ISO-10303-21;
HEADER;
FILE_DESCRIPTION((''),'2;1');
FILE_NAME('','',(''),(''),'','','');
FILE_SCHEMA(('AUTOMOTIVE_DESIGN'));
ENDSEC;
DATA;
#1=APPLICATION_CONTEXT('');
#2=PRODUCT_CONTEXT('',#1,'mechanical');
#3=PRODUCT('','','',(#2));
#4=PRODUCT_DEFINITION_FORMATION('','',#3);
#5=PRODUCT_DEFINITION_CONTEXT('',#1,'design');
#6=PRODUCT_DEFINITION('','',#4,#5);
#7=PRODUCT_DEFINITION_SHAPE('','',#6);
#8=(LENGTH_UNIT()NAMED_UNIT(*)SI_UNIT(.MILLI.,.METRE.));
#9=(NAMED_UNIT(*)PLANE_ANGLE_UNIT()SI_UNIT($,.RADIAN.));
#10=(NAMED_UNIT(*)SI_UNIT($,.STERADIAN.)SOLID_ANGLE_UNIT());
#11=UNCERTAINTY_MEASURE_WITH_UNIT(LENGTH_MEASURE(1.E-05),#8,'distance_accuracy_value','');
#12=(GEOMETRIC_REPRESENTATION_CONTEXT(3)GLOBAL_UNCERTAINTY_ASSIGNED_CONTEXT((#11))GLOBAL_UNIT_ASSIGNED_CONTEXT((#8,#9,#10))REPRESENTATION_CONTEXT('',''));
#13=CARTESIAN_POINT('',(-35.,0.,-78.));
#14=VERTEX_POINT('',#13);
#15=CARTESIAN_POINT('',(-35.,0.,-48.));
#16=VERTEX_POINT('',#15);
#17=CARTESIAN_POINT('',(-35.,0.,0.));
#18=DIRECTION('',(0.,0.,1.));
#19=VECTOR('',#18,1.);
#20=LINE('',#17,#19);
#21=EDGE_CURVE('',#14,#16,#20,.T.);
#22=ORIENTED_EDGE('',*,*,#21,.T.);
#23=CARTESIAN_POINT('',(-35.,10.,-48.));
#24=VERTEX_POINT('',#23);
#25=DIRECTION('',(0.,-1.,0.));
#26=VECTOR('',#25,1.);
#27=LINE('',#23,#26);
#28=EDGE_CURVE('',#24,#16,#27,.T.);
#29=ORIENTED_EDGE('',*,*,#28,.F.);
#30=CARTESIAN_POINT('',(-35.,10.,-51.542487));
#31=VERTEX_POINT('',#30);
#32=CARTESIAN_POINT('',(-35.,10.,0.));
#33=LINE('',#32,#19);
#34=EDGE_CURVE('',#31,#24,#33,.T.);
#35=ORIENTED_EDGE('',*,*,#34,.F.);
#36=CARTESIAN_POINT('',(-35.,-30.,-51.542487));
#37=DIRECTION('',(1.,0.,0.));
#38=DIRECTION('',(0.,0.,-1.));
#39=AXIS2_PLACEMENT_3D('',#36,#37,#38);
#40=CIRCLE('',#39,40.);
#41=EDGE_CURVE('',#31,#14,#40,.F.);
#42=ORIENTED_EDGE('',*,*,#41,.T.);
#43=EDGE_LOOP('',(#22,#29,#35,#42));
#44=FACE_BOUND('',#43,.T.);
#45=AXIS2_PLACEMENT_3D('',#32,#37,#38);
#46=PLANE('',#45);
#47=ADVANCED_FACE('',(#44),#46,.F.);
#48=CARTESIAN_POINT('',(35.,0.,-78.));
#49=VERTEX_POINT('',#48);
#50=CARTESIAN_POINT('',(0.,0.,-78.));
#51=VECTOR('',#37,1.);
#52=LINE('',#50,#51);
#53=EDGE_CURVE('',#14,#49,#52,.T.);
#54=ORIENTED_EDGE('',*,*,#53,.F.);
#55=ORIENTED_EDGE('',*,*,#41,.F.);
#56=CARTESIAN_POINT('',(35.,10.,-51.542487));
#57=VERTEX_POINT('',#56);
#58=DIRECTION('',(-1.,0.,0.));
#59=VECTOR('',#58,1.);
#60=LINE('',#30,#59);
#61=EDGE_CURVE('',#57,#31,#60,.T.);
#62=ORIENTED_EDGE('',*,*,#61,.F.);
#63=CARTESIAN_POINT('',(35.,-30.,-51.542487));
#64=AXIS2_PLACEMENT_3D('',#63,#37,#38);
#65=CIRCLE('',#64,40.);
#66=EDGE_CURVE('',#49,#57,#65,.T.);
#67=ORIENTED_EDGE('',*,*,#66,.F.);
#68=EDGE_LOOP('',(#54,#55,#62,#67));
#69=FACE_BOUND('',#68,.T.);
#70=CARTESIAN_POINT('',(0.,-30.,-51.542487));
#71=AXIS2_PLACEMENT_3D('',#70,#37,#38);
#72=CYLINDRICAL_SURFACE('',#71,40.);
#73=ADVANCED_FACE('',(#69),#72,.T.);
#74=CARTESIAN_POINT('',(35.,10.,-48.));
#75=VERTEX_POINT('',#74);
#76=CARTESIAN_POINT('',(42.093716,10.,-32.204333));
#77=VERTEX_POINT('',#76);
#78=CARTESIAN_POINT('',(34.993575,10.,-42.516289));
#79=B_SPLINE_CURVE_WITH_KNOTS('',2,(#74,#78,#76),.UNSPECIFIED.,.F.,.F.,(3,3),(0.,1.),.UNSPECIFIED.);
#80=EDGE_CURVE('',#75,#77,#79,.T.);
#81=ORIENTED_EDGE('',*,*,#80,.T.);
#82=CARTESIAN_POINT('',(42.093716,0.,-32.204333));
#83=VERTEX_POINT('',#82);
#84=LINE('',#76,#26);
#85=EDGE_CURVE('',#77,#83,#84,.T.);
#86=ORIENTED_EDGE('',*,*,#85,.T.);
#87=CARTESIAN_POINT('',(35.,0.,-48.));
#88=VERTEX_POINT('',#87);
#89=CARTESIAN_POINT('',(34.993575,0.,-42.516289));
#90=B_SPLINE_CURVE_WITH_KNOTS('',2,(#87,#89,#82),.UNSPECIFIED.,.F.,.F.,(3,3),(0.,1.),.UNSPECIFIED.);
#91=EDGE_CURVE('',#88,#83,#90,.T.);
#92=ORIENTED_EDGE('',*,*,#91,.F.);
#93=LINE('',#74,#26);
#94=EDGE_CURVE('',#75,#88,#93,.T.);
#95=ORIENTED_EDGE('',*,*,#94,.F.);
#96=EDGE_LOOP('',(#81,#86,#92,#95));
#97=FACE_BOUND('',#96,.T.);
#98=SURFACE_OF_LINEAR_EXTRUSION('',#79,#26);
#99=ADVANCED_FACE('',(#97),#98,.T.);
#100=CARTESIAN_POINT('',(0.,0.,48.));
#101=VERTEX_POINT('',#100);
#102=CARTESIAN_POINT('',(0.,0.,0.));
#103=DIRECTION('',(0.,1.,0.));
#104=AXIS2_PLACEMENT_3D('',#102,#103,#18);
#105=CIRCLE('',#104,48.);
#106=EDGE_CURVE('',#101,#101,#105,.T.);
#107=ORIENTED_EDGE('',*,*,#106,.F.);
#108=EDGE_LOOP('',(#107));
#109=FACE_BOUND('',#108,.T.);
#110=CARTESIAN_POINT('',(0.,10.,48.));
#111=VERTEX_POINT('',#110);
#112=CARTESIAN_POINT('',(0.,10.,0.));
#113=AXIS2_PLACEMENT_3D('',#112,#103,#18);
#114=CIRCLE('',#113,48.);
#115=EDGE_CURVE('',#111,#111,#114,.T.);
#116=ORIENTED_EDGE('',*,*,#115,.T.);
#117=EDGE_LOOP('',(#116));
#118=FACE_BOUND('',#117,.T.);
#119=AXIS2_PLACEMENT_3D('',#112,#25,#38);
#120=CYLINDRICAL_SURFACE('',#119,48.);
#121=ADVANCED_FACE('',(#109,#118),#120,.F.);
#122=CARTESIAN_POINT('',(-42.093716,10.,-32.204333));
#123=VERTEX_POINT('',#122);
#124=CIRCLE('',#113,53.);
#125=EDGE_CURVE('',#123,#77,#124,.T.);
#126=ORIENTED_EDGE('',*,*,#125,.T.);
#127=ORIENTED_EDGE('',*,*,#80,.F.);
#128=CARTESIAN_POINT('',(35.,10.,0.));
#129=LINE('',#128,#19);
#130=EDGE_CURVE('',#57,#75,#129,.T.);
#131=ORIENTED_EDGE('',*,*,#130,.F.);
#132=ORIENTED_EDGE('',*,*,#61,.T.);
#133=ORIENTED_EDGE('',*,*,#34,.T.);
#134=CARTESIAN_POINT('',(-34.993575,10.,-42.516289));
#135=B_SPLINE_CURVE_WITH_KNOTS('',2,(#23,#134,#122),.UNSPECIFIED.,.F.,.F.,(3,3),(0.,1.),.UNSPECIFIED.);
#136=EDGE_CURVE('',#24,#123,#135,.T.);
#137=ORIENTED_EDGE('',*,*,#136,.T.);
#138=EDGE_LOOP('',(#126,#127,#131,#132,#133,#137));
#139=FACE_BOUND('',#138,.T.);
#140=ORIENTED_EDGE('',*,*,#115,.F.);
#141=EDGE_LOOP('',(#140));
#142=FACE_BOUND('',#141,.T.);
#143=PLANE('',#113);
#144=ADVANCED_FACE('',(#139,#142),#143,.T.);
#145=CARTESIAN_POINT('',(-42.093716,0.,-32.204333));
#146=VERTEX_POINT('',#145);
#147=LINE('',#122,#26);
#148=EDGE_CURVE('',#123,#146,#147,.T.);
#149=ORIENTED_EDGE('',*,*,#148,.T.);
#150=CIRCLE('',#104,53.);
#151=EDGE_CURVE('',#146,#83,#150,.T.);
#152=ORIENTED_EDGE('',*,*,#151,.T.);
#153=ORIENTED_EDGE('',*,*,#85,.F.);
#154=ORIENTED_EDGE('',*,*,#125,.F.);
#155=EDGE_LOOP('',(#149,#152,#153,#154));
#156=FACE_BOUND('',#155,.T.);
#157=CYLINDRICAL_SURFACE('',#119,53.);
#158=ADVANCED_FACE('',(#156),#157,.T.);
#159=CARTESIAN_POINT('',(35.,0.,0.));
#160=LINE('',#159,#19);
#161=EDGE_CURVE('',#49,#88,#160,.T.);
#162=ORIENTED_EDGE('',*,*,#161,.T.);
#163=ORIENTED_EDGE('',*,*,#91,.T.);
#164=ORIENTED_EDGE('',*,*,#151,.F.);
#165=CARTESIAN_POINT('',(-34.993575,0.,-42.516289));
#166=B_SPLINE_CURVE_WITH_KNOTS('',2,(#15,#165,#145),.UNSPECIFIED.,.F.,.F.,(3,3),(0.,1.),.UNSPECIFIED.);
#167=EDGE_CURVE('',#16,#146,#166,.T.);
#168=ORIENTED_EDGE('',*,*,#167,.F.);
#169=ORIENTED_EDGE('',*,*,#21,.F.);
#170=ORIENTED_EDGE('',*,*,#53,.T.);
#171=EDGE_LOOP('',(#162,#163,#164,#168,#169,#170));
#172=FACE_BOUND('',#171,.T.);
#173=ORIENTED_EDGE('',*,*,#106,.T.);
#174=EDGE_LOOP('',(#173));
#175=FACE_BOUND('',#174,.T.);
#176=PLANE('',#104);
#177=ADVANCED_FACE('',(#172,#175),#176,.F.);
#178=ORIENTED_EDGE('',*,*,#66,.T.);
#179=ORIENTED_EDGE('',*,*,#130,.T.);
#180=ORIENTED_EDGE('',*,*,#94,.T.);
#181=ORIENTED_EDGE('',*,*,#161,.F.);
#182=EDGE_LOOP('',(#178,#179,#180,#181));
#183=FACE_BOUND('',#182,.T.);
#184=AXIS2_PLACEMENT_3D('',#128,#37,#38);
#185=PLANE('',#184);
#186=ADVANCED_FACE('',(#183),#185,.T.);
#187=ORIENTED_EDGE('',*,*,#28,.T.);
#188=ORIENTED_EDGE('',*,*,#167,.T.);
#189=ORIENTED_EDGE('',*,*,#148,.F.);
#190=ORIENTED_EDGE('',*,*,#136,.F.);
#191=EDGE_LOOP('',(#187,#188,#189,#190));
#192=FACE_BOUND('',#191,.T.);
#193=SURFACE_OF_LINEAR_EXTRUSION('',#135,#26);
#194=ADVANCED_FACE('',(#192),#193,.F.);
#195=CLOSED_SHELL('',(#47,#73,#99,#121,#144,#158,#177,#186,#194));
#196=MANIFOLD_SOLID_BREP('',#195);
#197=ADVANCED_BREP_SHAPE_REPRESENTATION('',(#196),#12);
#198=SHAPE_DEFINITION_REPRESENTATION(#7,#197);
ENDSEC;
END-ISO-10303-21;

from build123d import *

# Parameters (mm, degrees)
SKETCH1_R           = 48
BOSS_EXTRUDE1_DEPTH = 10
FILLET1_R           = 40


with BuildPart() as part:
    # Sketch1 → Boss-Extrude1 (new body)
    with BuildSketch(Plane(origin=(0, 0, 0), x_dir=(1, 0, 0), z_dir=(0, 1, 0))):
        with BuildLine():
            Line((35, 78), (-35, 78))
            Line((-35, 78), (-35, 48))
            add(Edge.make_bspline(
                [(-35, 48), (-34.99357519, 42.516288621), (-42.093715926, 32.204333242)],
                knots=[0, 0, 0, 1, 1, 1], degree=2))
            ThreePointArc((-42.093715926, 32.204333242), (0, -53), (42.093715926, 32.204333242))
            add(Edge.make_bspline(
                [(35, 48), (34.99357519, 42.516288621), (42.093715926, 32.204333242)],
                knots=[0, 0, 0, 1, 1, 1], degree=2))
            Line((35, 48), (35, 78))
        make_face()
        with Locations(Location((0, 0, 0), (0, 0, 270))):
            Circle(SKETCH1_R, mode=Mode.SUBTRACT)
    extrude(amount=BOSS_EXTRUDE1_DEPTH)

    # Fillet1
    # the kernel refuses this fillet: 40 mm, written as the material it takes off along each edge
    with BuildSketch(Plane(origin=(101.143782777, 10, -78), x_dir=(0, -1, 0), z_dir=(-1, 0, 0))) as fillet1_piece_1:
        with BuildLine():
            CenterArc((40, 26.457513111), FILLET1_R, 180, 41.409622109)
            Line((0, 26.457513111), (-0.8, 26.457513111))
            Line((-0.8, 26.457513111), (-0.8, 0))
            Line((-0.8, 0), (0, -0.8))
            ThreePointArc((0, -0.8), (5, -0.8), (9.4, -0.529150262))
            Line((9.4, -0.529150262), (10, 0))
        make_face()
    extrude(amount=202.287565553, mode=Mode.SUBTRACT)


solid = part.part
